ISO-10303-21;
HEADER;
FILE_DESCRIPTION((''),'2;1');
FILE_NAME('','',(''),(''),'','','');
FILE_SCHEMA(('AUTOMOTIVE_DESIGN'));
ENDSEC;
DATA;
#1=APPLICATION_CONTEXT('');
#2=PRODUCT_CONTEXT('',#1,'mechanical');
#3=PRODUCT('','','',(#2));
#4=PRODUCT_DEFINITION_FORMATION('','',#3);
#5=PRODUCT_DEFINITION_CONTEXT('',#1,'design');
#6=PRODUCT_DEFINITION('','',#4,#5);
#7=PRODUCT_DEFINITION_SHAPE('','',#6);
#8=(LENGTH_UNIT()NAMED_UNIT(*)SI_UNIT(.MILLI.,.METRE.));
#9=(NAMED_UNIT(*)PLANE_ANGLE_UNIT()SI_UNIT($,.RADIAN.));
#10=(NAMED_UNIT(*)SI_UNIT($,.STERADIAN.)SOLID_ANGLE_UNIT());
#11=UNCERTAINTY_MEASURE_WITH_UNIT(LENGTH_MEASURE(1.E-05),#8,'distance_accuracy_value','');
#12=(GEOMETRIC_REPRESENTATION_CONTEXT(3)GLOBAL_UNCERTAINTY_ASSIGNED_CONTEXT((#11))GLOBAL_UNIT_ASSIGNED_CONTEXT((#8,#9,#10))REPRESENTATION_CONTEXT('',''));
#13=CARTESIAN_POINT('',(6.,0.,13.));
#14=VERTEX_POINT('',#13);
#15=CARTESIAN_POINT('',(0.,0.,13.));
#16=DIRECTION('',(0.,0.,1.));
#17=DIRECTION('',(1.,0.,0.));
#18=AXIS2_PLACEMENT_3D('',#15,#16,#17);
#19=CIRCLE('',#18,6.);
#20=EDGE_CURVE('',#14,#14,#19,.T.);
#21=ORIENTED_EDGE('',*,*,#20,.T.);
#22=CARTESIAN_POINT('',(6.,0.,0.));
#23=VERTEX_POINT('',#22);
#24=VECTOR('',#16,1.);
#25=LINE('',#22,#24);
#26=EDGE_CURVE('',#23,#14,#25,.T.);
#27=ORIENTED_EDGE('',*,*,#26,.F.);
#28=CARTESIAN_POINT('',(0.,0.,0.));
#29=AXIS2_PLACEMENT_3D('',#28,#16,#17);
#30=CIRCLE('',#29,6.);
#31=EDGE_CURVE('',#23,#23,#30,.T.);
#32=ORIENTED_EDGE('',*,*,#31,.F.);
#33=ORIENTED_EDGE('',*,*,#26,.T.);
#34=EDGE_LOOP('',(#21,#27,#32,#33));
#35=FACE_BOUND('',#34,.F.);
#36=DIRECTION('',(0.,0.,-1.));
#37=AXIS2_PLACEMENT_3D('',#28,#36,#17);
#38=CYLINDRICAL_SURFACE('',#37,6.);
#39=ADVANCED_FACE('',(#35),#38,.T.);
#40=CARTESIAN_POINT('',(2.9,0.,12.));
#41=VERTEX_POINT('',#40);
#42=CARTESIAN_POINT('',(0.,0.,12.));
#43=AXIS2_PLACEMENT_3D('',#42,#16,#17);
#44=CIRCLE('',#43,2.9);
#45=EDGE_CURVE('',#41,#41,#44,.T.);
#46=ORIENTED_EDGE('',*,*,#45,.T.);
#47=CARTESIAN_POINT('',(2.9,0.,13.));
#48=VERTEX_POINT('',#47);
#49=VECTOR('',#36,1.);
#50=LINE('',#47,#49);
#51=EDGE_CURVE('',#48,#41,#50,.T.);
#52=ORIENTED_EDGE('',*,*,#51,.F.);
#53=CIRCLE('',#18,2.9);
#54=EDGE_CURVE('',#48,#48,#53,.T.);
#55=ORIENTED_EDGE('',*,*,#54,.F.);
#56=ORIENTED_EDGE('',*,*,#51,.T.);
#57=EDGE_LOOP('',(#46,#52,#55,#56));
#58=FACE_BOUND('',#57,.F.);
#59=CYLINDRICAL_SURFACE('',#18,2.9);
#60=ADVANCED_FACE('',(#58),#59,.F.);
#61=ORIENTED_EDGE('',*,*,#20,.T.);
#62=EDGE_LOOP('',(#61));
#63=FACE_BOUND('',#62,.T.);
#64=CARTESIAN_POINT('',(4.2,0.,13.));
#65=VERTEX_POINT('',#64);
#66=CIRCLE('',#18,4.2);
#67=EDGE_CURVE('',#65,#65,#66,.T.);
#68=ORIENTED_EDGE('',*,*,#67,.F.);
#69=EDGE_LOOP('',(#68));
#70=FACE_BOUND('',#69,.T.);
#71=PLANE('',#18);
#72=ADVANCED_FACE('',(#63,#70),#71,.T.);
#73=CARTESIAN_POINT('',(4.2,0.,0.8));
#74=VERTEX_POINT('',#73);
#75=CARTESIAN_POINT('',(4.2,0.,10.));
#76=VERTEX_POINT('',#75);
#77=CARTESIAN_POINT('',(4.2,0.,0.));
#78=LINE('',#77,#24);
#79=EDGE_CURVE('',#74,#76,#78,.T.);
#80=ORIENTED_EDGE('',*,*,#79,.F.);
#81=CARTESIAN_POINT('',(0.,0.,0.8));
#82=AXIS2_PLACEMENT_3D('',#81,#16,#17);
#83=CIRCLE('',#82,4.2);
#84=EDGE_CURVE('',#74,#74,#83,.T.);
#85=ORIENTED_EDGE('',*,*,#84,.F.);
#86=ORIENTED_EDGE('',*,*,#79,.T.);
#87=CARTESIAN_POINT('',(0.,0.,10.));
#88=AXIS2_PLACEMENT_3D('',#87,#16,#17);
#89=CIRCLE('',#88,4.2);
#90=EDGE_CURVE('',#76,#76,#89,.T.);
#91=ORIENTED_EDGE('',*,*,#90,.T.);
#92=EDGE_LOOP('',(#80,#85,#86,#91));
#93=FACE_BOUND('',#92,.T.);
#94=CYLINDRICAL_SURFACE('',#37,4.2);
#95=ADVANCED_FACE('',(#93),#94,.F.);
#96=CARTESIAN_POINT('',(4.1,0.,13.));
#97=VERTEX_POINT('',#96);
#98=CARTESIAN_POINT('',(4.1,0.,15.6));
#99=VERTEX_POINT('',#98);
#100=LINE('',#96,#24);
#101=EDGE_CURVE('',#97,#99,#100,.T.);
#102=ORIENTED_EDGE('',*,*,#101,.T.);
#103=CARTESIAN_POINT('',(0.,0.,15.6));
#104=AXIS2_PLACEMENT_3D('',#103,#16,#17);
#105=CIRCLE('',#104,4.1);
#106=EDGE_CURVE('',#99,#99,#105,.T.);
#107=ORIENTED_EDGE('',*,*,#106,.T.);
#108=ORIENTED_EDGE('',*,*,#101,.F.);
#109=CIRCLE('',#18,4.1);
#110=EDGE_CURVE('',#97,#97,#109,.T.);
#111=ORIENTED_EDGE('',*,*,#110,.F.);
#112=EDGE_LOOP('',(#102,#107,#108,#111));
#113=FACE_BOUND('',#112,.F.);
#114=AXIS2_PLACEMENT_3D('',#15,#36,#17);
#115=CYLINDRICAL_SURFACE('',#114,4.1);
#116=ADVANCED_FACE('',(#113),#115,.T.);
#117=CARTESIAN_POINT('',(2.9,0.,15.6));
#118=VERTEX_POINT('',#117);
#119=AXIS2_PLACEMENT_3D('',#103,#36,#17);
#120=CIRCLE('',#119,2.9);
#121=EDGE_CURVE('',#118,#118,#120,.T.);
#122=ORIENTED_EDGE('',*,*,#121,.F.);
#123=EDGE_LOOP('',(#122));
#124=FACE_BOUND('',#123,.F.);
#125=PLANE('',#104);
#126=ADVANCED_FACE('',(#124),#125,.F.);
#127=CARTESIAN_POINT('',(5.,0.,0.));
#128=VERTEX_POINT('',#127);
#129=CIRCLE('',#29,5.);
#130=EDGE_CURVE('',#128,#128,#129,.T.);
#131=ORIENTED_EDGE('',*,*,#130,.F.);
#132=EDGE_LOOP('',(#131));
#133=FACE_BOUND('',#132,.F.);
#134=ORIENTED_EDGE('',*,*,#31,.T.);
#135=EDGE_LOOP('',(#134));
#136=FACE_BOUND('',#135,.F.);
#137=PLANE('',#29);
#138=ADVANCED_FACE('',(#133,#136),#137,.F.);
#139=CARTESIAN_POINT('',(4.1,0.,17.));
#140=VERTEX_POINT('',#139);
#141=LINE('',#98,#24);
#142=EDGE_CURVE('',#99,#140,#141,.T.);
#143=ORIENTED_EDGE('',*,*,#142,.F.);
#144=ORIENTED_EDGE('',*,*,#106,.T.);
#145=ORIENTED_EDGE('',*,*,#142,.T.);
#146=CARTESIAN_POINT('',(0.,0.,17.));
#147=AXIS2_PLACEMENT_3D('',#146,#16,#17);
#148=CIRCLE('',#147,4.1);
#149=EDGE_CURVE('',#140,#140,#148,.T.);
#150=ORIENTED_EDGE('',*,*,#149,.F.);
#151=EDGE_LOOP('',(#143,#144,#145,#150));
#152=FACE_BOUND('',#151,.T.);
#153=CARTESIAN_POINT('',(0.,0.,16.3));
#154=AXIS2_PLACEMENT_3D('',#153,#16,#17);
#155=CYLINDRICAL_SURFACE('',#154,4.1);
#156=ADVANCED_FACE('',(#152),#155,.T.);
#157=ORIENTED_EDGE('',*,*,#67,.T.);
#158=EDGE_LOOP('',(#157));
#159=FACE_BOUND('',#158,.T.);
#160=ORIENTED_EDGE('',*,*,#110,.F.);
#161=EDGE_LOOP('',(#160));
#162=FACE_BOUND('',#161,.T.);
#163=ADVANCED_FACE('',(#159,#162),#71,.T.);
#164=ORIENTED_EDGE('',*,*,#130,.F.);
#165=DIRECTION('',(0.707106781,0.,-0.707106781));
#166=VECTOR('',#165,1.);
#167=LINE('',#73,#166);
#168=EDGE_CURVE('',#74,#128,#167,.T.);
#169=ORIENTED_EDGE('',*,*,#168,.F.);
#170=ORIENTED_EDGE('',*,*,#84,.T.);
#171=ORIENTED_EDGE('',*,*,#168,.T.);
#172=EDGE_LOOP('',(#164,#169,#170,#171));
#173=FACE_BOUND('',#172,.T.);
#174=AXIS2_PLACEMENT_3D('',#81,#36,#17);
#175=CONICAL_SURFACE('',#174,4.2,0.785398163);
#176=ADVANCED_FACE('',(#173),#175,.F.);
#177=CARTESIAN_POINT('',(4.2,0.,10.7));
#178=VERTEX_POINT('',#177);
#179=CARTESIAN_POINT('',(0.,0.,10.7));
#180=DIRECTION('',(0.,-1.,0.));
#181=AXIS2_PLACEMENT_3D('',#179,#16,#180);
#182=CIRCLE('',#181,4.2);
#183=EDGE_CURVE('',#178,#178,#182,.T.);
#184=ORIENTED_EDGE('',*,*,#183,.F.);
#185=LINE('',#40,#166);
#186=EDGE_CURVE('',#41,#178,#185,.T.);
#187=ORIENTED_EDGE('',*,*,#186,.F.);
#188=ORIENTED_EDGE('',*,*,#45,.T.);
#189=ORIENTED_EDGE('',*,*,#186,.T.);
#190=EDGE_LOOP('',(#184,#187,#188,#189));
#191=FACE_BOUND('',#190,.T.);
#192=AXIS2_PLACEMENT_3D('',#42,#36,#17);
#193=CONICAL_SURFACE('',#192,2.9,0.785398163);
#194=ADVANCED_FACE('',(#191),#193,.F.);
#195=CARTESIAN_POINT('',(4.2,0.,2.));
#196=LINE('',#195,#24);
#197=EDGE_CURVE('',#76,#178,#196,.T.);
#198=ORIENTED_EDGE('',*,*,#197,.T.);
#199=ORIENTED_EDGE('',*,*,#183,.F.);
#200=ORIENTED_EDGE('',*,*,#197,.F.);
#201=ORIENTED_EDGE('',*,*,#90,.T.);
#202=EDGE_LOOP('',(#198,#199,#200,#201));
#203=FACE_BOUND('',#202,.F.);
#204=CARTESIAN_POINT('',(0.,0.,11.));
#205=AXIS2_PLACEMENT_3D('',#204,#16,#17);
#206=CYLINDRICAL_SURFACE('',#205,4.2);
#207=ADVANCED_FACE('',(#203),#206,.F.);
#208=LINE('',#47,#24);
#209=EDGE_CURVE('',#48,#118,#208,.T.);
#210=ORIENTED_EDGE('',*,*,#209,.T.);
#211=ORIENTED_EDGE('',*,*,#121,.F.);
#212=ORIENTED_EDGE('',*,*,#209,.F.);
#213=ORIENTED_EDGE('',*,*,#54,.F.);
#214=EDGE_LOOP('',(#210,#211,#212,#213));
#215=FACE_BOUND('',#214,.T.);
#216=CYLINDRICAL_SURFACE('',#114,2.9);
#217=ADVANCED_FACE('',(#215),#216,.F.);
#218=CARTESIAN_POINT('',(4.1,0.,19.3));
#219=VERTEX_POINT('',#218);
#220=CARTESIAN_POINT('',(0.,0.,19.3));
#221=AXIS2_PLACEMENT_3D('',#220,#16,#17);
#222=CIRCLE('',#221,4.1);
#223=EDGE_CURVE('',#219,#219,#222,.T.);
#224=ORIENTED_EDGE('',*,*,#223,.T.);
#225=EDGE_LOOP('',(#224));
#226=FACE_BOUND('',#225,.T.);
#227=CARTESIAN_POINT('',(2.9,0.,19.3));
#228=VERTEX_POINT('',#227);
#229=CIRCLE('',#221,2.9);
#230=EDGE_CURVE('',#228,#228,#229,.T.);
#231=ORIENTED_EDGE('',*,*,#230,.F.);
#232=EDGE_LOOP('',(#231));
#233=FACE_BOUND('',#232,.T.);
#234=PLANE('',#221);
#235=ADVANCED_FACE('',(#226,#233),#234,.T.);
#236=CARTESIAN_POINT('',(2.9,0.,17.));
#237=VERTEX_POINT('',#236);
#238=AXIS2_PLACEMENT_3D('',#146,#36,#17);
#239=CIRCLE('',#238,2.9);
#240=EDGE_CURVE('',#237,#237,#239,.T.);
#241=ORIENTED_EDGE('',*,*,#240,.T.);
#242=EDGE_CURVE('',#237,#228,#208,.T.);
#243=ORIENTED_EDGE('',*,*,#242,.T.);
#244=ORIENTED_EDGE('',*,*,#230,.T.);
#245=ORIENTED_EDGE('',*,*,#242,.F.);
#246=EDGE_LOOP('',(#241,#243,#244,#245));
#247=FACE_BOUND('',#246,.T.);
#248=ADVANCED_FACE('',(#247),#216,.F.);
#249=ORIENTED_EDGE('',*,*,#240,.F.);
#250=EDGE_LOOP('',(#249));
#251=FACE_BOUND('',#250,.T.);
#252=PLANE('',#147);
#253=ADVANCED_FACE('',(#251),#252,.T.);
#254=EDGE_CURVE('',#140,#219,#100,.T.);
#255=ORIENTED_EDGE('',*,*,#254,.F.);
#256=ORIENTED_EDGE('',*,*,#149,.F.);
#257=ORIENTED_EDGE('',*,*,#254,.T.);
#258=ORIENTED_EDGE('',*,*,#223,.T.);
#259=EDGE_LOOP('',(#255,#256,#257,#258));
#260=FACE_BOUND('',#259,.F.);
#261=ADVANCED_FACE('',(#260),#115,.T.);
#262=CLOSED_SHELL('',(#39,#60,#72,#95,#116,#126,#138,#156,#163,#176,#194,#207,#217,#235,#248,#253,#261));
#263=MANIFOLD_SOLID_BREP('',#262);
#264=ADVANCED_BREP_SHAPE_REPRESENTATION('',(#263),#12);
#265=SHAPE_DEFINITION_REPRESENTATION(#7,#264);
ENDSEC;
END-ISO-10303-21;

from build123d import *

# Parameters (mm, degrees)
F0_R        = 6
F0_R_2      = 4.2
F1_DEPTH    = 13
F2_R        = 4.1
F2_R_2      = 2.9
F3_DEPTH    = 6.3
F4_R        = 4.2
F4_R_2      = 2.9
F5_DEPTH    = 3
F6_S5_R     = 4.2
F6_T6_DEPTH = 9
F7_SIZE     = 0.8
F9_R        = 4.1
F10_DEPTH   = 0.7


# Not quite as in the source:
# - a fillet or chamfer that OpenCascade refuses, or shapes differently, is made with other operations: its cross-section is extruded or revolved along the edge and cut away or added


with BuildPart() as f1:
    # F0 (on Top) → F1 (new body)
    with BuildSketch(Plane.XY):
        Circle(F0_R)
        Circle(F0_R_2, mode=Mode.SUBTRACT)
    extrude(amount=F1_DEPTH)



with BuildPart() as f3:
    # F2 (on face) → F3 (new body)
    with BuildSketch(Plane.XY.offset(13)):
        Circle(F2_R)
        Circle(F2_R_2, mode=Mode.SUBTRACT)
    extrude(amount=F3_DEPTH)


with BuildPart() as f1_1:
    add(f1.part)

    add(f3.part)  # F5 merges F3
    # F4 (on face) → F5 (join)
    with BuildSketch(Plane.XY.offset(13)):
        Circle(F4_R)
        Circle(F4_R_2, mode=Mode.SUBTRACT)
    extrude(amount=-F5_DEPTH)

    # F6: chamfer of 2 on 1 edges, made by hand


with BuildPart() as f6_tool2:
    # F6_s3 → F6_t4 (revolve)
    with BuildSketch(Plane.XZ):
        Polygon((2.9, 12), (4.9, 10), (2.9, 10), align=None)
    revolve(axis=Axis((0, 0, 10), (0, 0, 1)))

    # F6_s5 → F6_t6 (intersect, symmetric)
    with BuildSketch(Plane.XY.offset(11)):
        Circle(F6_S5_R)
    extrude(amount=F6_T6_DEPTH, both=True, mode=Mode.INTERSECT)


with BuildPart() as f1_2:
    add(f1_1.part)

    # F6_t1: cut F6_tool2
    add(f6_tool2.part, mode=Mode.SUBTRACT)

    # F7
    f7_edges = [f1_2.edges().sort_by_distance(p)[0] for p in [
        (-4.2, 0, 0),
    ]]
    chamfer(f7_edges, length=F7_SIZE)

    # F9 (on offset) → F10 (join, symmetric)
    with BuildSketch(Plane.XY.offset(16.3)):
        Circle(F9_R)
    extrude(amount=F10_DEPTH, both=True)


solid = f1_2.part
